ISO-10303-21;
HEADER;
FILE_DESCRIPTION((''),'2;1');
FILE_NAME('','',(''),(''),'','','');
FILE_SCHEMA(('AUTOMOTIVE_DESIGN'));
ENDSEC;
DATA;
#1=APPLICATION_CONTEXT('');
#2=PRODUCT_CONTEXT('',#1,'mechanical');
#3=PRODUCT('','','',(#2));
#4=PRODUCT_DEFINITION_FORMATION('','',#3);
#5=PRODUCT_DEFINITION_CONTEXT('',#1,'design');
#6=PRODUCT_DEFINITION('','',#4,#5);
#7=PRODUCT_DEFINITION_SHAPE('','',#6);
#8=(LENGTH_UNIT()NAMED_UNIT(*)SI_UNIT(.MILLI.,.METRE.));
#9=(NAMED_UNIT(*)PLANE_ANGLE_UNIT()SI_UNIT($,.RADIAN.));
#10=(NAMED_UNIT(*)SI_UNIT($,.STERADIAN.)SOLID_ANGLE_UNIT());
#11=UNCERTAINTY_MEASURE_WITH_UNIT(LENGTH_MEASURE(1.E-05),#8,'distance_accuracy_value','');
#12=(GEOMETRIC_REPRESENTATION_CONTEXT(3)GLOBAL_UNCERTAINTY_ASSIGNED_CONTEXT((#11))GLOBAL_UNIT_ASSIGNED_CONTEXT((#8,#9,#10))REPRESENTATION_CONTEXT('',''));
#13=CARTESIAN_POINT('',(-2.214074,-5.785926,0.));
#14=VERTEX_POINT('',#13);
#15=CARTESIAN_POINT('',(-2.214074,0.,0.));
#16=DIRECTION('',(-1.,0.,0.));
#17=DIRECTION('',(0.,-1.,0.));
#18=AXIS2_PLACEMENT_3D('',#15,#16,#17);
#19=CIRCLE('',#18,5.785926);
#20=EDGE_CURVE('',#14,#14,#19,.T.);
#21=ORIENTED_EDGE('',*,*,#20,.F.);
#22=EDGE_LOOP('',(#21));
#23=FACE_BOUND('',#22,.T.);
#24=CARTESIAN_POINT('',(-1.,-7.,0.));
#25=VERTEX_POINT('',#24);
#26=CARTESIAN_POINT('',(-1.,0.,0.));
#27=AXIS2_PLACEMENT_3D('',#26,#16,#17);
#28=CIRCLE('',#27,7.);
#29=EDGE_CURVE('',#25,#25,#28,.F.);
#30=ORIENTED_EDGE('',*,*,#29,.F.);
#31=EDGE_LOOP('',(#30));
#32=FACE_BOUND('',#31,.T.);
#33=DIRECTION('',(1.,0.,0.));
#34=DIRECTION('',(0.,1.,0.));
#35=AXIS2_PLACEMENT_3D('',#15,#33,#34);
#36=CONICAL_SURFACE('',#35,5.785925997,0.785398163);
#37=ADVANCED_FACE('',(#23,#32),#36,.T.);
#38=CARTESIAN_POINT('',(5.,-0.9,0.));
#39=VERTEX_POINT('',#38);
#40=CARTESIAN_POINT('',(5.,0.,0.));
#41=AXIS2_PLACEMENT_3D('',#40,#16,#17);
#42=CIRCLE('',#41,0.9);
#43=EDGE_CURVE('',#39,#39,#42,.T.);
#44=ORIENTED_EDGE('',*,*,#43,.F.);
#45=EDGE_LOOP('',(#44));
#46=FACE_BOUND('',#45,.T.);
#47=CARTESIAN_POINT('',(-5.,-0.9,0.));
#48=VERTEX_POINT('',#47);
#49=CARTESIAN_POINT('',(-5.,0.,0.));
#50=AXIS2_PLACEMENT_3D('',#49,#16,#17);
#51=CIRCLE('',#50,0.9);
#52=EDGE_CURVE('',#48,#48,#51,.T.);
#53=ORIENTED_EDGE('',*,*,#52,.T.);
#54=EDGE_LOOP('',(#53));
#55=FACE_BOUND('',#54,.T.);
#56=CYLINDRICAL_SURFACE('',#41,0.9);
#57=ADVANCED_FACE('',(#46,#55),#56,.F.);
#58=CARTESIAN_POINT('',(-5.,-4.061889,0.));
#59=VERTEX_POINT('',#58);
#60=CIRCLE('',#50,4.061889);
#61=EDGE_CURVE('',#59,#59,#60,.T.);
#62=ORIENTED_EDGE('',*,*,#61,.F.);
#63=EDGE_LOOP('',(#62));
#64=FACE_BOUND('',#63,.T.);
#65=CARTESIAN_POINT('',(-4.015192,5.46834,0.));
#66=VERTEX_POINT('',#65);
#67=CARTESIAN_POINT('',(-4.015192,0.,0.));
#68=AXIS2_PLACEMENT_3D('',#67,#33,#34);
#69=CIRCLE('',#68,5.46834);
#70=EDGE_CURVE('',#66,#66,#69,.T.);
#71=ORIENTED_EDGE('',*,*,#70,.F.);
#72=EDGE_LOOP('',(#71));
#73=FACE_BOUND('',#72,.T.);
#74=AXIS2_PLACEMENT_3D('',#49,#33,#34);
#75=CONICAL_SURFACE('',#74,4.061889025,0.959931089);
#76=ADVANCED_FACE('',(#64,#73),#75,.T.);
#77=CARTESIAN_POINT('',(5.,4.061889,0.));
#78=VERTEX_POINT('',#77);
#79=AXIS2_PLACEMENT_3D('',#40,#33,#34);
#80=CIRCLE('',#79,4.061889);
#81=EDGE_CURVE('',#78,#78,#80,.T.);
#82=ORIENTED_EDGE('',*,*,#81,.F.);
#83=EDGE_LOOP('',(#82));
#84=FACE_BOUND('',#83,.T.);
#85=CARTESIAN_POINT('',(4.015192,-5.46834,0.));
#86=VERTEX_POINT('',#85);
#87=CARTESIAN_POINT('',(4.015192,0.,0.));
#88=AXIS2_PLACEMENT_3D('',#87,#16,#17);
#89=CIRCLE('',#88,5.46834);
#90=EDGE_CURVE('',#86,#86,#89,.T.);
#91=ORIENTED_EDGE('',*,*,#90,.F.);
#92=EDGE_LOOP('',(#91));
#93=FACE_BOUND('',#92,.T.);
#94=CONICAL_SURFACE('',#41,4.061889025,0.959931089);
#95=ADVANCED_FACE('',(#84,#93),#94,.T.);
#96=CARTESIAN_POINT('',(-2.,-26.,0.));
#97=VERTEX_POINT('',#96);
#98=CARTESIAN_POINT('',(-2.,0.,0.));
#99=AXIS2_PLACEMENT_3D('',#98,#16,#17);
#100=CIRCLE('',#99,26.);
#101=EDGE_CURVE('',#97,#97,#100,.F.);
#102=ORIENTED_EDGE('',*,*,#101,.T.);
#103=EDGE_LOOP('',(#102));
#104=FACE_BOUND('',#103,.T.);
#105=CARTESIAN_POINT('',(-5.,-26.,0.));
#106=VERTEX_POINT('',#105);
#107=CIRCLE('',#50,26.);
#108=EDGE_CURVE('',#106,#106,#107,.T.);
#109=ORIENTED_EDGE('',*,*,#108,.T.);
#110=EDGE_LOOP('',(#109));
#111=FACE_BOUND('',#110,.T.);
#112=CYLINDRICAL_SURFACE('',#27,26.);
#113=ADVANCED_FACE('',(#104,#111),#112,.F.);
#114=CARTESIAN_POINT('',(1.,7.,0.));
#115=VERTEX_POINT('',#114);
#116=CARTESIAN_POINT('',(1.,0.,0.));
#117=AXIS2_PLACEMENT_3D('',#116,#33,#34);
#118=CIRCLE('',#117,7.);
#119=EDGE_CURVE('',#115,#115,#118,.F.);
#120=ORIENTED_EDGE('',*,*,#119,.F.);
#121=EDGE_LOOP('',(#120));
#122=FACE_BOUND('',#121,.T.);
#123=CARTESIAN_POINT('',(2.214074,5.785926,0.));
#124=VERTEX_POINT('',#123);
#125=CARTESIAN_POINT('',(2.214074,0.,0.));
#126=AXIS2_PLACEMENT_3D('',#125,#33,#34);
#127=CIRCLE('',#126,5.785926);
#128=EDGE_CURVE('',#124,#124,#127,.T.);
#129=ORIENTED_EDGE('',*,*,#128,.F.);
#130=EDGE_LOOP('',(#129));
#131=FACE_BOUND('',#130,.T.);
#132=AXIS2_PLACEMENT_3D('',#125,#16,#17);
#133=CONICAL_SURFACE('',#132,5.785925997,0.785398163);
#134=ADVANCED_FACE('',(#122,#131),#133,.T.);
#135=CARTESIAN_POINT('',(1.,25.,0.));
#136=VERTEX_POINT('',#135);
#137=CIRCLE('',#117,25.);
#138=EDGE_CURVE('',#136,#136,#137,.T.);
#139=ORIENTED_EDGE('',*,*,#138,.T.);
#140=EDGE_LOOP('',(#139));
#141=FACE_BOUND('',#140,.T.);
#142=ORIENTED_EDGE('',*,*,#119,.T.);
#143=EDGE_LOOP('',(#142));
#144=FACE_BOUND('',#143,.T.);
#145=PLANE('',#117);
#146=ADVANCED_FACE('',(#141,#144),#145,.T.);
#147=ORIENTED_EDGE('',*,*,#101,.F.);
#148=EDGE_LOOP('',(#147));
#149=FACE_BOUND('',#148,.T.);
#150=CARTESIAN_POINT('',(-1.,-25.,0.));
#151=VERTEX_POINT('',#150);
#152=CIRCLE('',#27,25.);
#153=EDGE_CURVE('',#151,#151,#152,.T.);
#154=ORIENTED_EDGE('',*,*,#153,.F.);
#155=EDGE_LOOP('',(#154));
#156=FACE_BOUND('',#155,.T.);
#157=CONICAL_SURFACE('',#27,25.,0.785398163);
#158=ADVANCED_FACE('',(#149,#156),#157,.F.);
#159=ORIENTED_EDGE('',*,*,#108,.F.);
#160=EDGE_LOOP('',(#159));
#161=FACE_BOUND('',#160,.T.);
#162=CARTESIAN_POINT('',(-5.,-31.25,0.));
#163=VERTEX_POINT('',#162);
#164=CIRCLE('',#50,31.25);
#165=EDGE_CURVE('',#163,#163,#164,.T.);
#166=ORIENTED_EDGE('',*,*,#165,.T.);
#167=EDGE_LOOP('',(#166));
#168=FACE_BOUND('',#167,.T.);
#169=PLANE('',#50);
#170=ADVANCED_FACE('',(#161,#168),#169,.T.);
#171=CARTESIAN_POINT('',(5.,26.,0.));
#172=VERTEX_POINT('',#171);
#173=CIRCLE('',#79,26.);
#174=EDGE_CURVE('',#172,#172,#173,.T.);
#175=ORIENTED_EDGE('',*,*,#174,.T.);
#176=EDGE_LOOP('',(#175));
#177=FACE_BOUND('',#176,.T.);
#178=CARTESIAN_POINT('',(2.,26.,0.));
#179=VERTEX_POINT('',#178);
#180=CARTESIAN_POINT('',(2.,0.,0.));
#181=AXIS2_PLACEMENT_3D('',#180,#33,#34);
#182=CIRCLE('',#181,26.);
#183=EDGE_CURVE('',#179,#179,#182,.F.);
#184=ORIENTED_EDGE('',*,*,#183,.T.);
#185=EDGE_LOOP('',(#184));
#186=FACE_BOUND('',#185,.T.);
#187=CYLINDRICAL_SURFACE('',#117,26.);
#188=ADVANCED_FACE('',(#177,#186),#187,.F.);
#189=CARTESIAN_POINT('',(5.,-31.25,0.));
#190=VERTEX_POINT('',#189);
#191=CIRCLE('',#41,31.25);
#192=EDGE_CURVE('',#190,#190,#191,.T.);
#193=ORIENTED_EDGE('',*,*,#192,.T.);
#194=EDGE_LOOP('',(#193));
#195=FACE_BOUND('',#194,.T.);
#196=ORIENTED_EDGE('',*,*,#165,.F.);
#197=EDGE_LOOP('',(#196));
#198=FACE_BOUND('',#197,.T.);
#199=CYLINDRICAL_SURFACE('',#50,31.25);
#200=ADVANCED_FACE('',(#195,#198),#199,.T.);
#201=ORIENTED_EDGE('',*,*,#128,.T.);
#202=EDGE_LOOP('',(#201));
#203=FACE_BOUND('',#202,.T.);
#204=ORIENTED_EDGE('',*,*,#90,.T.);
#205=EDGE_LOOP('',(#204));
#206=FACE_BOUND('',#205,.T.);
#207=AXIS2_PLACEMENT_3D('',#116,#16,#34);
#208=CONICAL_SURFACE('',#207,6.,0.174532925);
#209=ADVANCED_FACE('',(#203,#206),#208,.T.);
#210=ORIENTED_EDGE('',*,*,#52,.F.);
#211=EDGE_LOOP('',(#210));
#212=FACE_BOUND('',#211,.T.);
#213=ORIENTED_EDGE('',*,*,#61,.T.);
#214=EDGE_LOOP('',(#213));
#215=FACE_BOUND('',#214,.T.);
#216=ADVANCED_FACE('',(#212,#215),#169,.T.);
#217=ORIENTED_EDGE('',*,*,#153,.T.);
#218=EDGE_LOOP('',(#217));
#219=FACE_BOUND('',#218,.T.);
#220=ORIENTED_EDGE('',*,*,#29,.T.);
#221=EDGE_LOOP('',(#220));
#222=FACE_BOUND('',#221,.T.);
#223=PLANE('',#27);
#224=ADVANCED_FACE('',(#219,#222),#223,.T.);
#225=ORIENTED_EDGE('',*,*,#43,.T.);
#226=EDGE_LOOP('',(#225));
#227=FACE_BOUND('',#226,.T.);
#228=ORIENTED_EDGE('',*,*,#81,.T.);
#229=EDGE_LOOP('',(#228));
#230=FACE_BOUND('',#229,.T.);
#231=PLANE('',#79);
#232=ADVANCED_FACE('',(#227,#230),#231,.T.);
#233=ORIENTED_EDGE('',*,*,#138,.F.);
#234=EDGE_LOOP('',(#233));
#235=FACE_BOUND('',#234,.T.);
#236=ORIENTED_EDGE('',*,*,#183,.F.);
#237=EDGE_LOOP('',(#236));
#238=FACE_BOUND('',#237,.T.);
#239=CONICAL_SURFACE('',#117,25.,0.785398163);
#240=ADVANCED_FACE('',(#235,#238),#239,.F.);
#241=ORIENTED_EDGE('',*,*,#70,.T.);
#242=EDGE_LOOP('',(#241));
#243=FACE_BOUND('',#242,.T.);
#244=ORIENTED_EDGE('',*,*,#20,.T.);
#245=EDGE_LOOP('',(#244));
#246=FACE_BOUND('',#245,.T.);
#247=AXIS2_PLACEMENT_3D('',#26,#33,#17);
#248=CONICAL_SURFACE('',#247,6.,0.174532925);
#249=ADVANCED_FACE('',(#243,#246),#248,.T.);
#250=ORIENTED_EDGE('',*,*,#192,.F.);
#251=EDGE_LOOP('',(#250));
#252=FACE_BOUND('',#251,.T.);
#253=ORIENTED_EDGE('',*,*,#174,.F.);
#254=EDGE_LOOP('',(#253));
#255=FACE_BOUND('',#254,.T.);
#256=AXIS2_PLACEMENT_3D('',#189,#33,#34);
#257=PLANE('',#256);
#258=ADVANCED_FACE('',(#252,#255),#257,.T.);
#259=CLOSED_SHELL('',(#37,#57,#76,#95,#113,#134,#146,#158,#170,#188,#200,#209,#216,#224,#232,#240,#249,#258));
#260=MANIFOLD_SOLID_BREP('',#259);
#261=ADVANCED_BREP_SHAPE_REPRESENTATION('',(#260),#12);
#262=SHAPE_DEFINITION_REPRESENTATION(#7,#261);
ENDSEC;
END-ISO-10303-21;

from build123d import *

# Parameters (mm, degrees)
SKETCH1_W           = 10
SKETCH1_H           = 31.25
SKETCH2_R           = 26
CUT_EXTRUDE1_DEPTH  = 4
SKETCH3_R           = 6
BOSS_EXTRUDE1_DEPTH = 4
BOSS_EXTRUDE1_TAPER = 10
CUT_EXTRUDE2_START  = -4
SKETCH4_R           = 26
CUT_EXTRUDE2_DEPTH  = 4
SKETCH5_R           = 6
BOSS_EXTRUDE2_DEPTH = 4
BOSS_EXTRUDE2_TAPER = 10
CHAMFER1_SIZE       = 1
CHAMFER1_SIZE_2     = 1.232803052
SKETCH6_R           = 0.9
CUT_EXTRUDE3_DEPTH  = 46.311422401


with BuildPart() as part:
    # Sketch1 → Revolve1 (revolve)
    with BuildSketch(Plane.XY):
        with Locations((0, -15.625)):
            Rectangle(SKETCH1_W, SKETCH1_H)
    revolve(axis=Axis((-5, 0, 0), (1, 0, 0)))

    # Sketch2 → Cut-Extrude1 (cut)
    with BuildSketch(Plane(origin=(5, 0, 0), x_dir=(0, 0, -1), z_dir=(1, 0, 0))):
        with Locations(Location((0, 0, 0), (0, 0, 90))):
            Circle(SKETCH2_R)
    extrude(amount=-CUT_EXTRUDE1_DEPTH, mode=Mode.SUBTRACT)

    # Sketch3 → Boss-Extrude1 (add)
    with BuildSketch(Plane(origin=(1, 0, 0), x_dir=(0, 0, -1), z_dir=(1, 0, 0))):
        Circle(SKETCH3_R)
    extrude(amount=BOSS_EXTRUDE1_DEPTH, taper=BOSS_EXTRUDE1_TAPER)

    # Sketch4 → Cut-Extrude2 (cut)
    with BuildSketch(Plane.ZY.offset(5).offset(CUT_EXTRUDE2_START)):
        with Locations(Location((0, 0, 0), (0, 0, 90))):
            Circle(SKETCH4_R)
    extrude(amount=CUT_EXTRUDE2_DEPTH, mode=Mode.SUBTRACT)

    # Sketch5 → Boss-Extrude2 (add)
    with BuildSketch(Plane.ZY.offset(1)):
        Circle(SKETCH5_R)
    extrude(amount=BOSS_EXTRUDE2_DEPTH, taper=BOSS_EXTRUDE2_TAPER)

    # Chamfer1
    # the kernel refuses this chamfer: 1.232803052, 1 mm, written as the material it adds along each edge
    with BuildSketch(Plane(origin=(1, 0, 0), x_dir=(0, 0, -1), z_dir=(0, -1, 0))) as chamfer1_piece_1:
        Polygon((6 + CHAMFER1_SIZE, 0), (6 - CHAMFER1_SIZE_2 * 0.173648177642, CHAMFER1_SIZE_2 * 0.98480775287), (6, 0), align=None)
    revolve(axis=Axis((1, 0, 0), (1, 0, 0)))
    with BuildSketch(Plane(origin=(-1, 0, 0), x_dir=(0, 1, 0), z_dir=(0, 0, 1))) as chamfer1_piece_2:
        Polygon((26, CHAMFER1_SIZE), (26 - CHAMFER1_SIZE, 0), (26, 0), align=None)
    revolve(axis=Axis((-1, 0, 0), (-1, 0, 0)))
    with BuildSketch(Plane(origin=(1, 0, 0), x_dir=(0, 1, 0), z_dir=(0, 0, -1))) as chamfer1_piece_3:
        Polygon((26, CHAMFER1_SIZE), (26 - CHAMFER1_SIZE, 0), (26, 0), align=None)
    revolve(axis=Axis((1, 0, 0), (1, 0, 0)))
    with BuildSketch(Plane(origin=(-1, 0, 0), x_dir=(0, 0, 1), z_dir=(0, -1, 0))) as chamfer1_piece_4:
        Polygon((6 + CHAMFER1_SIZE, 0), (6 - CHAMFER1_SIZE_2 * 0.173648177642, CHAMFER1_SIZE_2 * 0.98480775287), (6, 0), align=None)
    revolve(axis=Axis((-1, 0, 0), (-1, 0, 0)))
    # the kernel refuses this chamfer: 1.232803052, 1 mm, written as the material it takes off along each edge
    with BuildSketch(Plane(origin=(5, 0, 0), x_dir=(0, 0, -1), z_dir=(0, 1, 0))) as chamfer1_2_piece_1:
        Polygon((5.294692077 + CHAMFER1_SIZE * 0.173648177667, CHAMFER1_SIZE * 0.984807753012), (5.294692077 - CHAMFER1_SIZE_2, 0), (5.294692077, 0), align=None)
    revolve(axis=Axis((5, 0, 0), (-1, 0, 0)), mode=Mode.SUBTRACT)
    with BuildSketch(Plane(origin=(-5, 0, 0), x_dir=(0, 0, 1), z_dir=(0, 1, 0))) as chamfer1_2_piece_2:
        Polygon((5.294692077 + CHAMFER1_SIZE * 0.173648177667, CHAMFER1_SIZE * 0.984807753012), (5.294692077 - CHAMFER1_SIZE_2, 0), (5.294692077, 0), align=None)
    revolve(axis=Axis((-5, 0, 0), (1, 0, 0)), mode=Mode.SUBTRACT)

    # Sketch6 → Cut-Extrude3 (cut, through all)
    with BuildSketch(Plane.ZY.offset(5)):
        with Locations(Location((0, 0, 0), (0, 0, 270))):
            Circle(SKETCH6_R)
    extrude(amount=-CUT_EXTRUDE3_DEPTH, mode=Mode.SUBTRACT)


solid = part.part
